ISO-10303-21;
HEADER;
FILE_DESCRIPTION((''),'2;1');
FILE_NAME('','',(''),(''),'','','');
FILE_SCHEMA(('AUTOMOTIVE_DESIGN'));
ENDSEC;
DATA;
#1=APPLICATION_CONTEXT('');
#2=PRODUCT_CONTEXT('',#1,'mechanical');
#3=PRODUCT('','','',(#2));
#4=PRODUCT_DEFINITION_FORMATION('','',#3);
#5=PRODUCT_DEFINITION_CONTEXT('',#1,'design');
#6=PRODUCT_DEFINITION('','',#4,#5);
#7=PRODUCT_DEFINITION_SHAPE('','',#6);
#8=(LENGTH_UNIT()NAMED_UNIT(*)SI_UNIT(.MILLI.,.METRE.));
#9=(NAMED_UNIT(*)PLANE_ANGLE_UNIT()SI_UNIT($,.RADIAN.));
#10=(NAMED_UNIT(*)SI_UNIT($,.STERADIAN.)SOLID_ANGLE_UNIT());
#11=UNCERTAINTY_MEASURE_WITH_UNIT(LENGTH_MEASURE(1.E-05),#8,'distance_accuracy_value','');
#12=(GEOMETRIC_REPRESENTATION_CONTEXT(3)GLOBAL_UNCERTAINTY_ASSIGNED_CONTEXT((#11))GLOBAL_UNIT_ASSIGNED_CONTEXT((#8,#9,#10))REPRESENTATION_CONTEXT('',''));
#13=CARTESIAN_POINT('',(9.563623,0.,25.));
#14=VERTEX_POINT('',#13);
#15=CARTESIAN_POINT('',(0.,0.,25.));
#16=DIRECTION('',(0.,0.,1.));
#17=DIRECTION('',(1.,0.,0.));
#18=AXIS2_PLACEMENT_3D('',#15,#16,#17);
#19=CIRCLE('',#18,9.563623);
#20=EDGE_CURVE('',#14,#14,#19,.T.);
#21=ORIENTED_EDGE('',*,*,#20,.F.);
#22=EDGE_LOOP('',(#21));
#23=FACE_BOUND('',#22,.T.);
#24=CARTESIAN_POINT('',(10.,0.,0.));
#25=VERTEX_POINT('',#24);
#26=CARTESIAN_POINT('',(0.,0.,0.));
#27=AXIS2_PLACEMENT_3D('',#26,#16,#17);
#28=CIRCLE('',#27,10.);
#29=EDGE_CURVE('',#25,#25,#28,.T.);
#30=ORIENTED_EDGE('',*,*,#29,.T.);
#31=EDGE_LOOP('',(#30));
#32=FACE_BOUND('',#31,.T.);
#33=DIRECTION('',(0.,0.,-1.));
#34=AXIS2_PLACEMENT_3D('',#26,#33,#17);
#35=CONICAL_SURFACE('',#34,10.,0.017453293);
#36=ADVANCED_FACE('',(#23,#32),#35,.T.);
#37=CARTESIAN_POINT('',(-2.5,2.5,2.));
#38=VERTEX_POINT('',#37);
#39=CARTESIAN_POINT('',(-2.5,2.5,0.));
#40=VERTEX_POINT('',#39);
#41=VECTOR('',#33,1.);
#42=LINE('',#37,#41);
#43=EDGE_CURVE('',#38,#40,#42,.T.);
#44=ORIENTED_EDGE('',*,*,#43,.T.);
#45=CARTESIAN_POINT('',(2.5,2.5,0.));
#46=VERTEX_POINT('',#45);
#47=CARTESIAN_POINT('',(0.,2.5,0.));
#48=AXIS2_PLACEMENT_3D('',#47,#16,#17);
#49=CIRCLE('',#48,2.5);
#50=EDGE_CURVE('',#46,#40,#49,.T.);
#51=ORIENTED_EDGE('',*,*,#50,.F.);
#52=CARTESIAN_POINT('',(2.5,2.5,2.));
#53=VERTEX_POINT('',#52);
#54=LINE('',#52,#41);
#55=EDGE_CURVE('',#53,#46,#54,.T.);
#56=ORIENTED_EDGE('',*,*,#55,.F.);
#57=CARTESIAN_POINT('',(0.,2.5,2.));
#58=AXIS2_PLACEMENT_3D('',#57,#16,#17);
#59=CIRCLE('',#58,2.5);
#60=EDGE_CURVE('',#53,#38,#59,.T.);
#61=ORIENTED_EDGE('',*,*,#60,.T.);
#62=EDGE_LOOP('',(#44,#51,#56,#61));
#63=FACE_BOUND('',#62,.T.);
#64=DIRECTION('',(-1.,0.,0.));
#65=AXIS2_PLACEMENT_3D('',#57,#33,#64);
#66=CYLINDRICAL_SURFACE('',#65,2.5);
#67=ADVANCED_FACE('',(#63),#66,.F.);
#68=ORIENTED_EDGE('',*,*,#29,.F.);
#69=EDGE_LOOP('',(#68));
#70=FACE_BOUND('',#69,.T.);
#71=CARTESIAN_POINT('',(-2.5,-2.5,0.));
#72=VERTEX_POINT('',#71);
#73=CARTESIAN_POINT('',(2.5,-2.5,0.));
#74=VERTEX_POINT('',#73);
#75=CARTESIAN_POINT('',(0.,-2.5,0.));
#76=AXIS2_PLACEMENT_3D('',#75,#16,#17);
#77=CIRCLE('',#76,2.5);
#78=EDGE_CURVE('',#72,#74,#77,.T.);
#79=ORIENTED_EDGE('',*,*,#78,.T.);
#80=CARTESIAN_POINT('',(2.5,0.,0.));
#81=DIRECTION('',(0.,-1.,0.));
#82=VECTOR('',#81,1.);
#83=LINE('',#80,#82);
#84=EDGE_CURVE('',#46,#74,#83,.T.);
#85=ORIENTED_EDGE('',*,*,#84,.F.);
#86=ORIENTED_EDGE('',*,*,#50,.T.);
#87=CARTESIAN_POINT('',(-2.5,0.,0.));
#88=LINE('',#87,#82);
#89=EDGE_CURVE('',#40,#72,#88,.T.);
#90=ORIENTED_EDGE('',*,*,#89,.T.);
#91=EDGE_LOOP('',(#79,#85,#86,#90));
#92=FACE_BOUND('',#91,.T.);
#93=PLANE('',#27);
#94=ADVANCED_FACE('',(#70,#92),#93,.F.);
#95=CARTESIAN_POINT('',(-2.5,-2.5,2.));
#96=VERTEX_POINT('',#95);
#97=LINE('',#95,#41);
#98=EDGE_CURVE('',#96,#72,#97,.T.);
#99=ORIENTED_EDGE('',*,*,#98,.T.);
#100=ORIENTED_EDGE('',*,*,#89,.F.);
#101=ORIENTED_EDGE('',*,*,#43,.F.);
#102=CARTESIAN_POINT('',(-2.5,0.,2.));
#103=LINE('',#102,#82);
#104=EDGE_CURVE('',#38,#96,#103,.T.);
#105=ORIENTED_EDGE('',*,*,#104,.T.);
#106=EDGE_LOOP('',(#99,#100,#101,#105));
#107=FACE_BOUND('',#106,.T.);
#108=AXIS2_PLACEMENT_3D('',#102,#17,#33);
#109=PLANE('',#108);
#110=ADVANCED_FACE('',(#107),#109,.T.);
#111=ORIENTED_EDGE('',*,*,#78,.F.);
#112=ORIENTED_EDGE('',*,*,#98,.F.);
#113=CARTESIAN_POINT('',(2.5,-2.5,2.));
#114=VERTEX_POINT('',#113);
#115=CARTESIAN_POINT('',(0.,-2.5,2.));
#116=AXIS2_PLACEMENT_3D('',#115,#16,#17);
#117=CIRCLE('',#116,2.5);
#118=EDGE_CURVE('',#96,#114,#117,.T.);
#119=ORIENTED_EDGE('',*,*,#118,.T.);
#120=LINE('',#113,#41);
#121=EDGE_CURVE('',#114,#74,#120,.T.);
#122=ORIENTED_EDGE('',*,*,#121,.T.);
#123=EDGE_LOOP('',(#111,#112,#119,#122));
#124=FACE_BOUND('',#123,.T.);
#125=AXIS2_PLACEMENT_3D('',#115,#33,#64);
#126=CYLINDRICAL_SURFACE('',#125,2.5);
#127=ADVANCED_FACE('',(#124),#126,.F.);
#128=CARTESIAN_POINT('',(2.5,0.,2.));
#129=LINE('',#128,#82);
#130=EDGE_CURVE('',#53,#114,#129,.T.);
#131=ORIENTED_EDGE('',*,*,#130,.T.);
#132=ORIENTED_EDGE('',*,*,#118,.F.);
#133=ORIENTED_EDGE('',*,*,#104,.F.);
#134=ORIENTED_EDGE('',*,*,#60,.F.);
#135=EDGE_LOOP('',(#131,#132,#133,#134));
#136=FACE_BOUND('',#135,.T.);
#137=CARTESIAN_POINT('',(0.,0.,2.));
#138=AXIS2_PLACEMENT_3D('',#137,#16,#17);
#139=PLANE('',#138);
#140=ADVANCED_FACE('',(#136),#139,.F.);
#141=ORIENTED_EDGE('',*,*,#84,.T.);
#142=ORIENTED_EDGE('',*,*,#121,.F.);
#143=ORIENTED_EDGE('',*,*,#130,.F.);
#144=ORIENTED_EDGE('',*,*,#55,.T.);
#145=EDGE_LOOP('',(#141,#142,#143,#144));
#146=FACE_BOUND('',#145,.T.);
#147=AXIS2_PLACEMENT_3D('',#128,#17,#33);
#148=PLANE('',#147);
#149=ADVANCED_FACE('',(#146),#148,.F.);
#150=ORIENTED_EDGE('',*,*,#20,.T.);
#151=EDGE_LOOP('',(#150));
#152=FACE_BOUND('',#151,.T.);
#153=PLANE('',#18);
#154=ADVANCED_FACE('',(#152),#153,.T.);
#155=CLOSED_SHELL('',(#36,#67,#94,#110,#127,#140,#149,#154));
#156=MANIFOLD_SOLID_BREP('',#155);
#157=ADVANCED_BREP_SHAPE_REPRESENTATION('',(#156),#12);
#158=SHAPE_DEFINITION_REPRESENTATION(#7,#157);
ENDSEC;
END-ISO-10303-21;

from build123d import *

# Parameters (mm, degrees)
BASE_R         = 10
CYLINDER_DEPTH = 25
CYLINDER_TAPER = 1
KEY_SLOT_DEPTH = 2


# Read off the part's stored shape, not the designer's step: key slot
with BuildPart() as part:
    # base → cylinder (new body)
    with BuildSketch(Plane.XY):
        Circle(BASE_R)
    extrude(amount=CYLINDER_DEPTH, taper=CYLINDER_TAPER)

    # key slot outline → key slot (cut)
    with BuildSketch(Plane.XY):
        with BuildLine():
            Line((-2.5, 2.5), (-2.5, -2.5))
            ThreePointArc((-2.5, -2.5), (0, -5), (2.5, -2.5))
            Line((2.5, -2.5), (2.5, 2.5))
            ThreePointArc((2.5, 2.5), (0, 5), (-2.5, 2.5))
        make_face()
    extrude(amount=KEY_SLOT_DEPTH, mode=Mode.SUBTRACT)


solid = part.part
